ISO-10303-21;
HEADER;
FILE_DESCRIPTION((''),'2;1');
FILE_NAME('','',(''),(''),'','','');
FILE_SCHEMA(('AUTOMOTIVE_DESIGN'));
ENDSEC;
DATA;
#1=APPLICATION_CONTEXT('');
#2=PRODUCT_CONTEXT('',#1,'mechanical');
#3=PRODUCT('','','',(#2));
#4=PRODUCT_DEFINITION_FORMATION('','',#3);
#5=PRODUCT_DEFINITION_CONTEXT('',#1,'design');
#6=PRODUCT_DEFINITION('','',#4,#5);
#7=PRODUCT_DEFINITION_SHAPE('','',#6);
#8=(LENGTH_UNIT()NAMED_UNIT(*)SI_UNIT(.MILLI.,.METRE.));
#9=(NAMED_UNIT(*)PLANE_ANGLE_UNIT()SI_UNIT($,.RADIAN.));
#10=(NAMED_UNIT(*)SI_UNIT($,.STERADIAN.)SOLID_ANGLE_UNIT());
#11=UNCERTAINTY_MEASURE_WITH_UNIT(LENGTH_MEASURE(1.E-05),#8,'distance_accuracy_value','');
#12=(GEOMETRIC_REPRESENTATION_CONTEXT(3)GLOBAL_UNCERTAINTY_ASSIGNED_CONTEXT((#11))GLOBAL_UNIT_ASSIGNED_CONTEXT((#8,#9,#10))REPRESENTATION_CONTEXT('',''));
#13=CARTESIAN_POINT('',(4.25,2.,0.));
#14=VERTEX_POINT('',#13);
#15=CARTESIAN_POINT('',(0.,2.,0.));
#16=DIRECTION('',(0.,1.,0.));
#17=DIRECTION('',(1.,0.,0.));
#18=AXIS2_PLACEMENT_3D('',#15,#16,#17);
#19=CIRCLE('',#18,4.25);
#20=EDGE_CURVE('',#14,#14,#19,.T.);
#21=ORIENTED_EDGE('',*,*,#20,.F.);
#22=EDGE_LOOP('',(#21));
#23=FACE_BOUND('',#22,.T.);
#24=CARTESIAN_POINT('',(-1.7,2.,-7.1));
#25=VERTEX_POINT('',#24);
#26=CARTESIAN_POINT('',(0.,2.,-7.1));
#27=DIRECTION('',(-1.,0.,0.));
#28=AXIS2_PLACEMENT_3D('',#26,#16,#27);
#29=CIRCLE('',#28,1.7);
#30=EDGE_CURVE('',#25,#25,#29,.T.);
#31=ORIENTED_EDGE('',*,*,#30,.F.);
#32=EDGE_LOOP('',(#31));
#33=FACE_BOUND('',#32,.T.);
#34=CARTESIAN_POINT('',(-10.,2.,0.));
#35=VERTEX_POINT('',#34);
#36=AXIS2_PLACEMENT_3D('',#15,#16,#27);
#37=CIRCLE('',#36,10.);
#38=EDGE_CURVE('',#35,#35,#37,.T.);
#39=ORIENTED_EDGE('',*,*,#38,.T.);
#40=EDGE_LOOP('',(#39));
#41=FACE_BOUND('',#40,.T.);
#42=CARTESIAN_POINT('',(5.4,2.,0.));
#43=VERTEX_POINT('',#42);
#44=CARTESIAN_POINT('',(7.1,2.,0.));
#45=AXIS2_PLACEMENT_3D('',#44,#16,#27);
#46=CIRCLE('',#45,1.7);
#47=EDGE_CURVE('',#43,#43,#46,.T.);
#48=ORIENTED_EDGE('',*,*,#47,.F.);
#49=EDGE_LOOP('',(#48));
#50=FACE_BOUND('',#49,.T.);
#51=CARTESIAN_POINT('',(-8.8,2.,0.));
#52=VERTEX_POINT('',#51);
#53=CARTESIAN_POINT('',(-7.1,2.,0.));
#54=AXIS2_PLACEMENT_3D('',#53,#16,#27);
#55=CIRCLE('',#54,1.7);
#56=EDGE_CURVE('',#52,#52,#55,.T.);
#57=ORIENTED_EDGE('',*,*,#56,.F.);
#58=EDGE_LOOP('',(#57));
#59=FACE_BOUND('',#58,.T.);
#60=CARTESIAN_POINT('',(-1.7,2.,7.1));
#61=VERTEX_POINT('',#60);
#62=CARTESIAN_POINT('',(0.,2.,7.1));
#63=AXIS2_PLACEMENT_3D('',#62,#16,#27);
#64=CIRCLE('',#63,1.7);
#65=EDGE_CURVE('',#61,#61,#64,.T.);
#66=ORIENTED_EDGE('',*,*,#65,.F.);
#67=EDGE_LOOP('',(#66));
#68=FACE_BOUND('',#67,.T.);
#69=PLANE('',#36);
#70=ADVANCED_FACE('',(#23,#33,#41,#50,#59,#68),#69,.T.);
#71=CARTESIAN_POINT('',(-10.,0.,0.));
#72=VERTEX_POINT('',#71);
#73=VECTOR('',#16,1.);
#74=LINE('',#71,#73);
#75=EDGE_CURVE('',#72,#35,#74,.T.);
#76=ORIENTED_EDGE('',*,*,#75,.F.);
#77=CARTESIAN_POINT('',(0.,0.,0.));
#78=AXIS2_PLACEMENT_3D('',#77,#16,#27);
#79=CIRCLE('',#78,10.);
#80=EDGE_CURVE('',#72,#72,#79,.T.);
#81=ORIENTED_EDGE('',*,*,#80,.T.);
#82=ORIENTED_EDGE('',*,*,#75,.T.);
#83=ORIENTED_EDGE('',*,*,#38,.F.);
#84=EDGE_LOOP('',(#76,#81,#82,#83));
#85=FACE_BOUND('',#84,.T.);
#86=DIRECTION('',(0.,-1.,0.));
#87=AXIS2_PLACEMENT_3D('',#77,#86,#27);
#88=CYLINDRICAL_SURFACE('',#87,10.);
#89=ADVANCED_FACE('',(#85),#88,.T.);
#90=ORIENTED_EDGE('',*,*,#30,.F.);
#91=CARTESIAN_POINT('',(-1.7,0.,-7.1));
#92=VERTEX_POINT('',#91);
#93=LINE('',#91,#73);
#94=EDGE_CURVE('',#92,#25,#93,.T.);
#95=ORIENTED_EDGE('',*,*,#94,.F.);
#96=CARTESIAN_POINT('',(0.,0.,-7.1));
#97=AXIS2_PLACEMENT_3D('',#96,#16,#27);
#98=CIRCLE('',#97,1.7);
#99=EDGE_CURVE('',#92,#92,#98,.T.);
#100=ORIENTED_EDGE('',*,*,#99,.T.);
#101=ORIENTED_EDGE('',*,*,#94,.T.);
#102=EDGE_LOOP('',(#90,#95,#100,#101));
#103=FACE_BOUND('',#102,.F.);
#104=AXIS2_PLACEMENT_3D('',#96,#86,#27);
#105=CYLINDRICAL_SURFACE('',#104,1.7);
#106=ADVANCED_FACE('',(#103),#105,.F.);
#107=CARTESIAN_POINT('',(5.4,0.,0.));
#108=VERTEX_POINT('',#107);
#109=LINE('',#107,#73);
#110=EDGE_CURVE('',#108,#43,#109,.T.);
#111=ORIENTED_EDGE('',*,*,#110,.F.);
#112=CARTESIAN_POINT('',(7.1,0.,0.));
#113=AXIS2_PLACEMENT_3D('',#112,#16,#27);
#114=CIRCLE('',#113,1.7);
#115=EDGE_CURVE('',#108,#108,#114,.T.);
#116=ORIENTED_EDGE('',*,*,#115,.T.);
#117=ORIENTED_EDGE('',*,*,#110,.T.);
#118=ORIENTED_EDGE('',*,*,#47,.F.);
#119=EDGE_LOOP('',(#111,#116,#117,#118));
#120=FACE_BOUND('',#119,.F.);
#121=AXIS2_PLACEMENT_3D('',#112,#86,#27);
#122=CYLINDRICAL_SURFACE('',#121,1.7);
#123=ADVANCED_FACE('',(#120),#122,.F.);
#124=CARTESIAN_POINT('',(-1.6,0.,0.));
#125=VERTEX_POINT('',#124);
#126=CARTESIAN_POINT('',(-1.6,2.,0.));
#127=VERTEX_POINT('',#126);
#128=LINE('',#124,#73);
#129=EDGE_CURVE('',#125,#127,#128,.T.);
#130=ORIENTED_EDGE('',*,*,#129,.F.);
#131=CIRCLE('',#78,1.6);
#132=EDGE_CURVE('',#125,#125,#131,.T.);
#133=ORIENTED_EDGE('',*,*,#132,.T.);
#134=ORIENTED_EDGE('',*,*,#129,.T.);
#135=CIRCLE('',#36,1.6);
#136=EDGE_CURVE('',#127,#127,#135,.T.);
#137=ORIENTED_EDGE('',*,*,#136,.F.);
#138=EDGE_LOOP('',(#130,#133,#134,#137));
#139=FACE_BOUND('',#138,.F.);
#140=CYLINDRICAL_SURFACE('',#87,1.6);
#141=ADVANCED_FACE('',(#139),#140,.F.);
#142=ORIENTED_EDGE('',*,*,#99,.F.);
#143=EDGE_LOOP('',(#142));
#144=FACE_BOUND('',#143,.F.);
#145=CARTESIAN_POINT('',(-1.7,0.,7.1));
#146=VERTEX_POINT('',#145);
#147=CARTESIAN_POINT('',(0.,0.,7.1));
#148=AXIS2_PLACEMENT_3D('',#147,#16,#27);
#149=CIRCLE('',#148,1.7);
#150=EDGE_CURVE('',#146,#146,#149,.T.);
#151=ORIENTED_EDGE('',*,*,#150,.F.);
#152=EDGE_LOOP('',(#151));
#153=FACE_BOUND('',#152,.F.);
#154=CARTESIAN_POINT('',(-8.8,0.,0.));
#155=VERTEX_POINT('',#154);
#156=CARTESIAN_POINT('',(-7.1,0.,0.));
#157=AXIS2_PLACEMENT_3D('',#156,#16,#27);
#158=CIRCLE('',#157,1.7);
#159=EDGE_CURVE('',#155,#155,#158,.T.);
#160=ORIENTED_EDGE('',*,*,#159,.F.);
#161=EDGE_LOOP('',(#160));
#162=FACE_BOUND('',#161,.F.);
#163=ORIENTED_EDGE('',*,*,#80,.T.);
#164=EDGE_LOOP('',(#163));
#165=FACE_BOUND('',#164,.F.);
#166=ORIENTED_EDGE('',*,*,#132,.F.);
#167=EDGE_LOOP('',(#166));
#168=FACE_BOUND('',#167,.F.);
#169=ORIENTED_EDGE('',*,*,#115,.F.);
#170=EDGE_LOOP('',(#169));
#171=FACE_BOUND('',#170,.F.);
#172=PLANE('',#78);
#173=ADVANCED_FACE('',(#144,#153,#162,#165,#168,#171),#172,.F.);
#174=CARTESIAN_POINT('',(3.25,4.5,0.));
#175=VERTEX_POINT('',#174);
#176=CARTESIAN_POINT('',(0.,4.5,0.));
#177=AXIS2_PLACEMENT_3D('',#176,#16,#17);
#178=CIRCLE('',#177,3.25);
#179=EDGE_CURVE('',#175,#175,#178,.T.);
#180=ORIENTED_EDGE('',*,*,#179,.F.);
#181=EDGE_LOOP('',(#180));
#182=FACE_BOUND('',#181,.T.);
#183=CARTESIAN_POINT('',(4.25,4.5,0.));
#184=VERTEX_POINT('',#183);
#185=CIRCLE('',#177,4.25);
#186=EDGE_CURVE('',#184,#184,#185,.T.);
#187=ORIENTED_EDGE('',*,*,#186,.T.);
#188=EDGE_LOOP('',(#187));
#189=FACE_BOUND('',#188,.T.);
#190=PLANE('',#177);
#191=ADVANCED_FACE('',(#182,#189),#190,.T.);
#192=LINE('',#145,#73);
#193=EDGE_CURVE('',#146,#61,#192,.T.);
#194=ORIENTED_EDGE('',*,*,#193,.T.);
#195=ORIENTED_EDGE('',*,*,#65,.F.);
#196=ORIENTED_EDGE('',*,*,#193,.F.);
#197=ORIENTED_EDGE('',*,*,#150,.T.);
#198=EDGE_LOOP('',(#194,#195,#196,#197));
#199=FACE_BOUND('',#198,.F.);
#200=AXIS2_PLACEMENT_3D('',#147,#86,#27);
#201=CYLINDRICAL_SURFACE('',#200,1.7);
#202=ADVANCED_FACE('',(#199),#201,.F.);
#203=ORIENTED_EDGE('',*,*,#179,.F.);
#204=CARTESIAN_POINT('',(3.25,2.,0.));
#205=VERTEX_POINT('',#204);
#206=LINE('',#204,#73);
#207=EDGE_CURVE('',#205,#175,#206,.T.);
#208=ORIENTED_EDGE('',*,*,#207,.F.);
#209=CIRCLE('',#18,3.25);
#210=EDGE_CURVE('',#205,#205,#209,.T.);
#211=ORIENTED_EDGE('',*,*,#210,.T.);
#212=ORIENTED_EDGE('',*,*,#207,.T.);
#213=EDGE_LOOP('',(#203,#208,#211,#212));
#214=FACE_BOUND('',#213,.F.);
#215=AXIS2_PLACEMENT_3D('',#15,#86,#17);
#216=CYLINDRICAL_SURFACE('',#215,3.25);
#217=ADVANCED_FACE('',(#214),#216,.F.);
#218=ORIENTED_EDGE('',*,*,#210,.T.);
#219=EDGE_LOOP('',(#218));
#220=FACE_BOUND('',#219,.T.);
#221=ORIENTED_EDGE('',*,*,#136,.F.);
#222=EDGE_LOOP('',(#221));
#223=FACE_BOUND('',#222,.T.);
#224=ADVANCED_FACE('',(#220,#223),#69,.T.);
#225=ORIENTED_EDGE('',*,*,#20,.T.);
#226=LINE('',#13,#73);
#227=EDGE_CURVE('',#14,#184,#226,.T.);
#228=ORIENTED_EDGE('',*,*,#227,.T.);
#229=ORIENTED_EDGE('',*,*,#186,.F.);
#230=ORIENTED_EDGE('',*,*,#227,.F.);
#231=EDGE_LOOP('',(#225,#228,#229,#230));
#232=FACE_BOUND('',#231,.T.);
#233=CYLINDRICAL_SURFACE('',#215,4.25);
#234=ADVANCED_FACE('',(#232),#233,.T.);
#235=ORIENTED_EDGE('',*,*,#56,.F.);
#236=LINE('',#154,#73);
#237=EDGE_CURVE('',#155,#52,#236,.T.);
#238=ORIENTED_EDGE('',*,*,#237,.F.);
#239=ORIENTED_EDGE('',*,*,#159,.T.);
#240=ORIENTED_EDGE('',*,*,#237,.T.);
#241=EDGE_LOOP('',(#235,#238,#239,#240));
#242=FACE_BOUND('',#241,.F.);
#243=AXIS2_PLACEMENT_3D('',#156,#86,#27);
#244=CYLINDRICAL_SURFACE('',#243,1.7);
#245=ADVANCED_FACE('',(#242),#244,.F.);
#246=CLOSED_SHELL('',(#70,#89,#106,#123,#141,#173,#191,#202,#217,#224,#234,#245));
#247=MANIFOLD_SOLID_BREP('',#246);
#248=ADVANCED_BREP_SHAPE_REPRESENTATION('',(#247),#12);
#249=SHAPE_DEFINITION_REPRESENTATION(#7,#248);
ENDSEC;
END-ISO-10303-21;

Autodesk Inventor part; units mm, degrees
ref_plane "YZ Plane" through (0, 0, 0) normal (1, 0, 0) x (0, 1, 0)
ref_plane "XZ Plane" through (0, 0, 0) normal (0, 1, 0) x (-1, 0, 0)
ref_plane "XY Plane" through (0, 0, 0) normal (0, 0, 1) x (1, 0, 0)
sketch "Эскиз1" plane through (0, 0, 0) normal (0, 1, 0) x (-1, 0, 0)
  circle A0 centre (0, 0) radius 10
  circle A1 centre (0, 0) radius 1.6
  circle A2 centre (0, 7.1) radius 1.7
  circle A3 centre (-7.1, 0) radius 1.7
  circle A4 centre (0, -7.1) radius 1.7
  circle A5 centre (7.1, 0) radius 1.7
  dimension "d0" = 20
  dimension "d1" = 3.2
  dimension "d2" = 3.4
  dimension "d3" = 1.2
  dimension "d6" = 360
extrude "Выдавливание1" add sketch "Эскиз1" along normal blind 2
sketch "Эскиз2" plane through (0, 2, 0) normal (0, 1, 0) x (1, 0, 0)
  circle A0 centre (0, 0) radius 1.6 projected
  circle A1 centre (0, 0) radius 4.25
  circle A2 centre (0, 0) radius 3.25
  dimension "d10" = 8.5
  dimension "d11" = 6.5
extrude "Выдавливание2" add sketch "Эскиз2" along normal blind 2.5 contours A1
properties part number "Servo krepej"
